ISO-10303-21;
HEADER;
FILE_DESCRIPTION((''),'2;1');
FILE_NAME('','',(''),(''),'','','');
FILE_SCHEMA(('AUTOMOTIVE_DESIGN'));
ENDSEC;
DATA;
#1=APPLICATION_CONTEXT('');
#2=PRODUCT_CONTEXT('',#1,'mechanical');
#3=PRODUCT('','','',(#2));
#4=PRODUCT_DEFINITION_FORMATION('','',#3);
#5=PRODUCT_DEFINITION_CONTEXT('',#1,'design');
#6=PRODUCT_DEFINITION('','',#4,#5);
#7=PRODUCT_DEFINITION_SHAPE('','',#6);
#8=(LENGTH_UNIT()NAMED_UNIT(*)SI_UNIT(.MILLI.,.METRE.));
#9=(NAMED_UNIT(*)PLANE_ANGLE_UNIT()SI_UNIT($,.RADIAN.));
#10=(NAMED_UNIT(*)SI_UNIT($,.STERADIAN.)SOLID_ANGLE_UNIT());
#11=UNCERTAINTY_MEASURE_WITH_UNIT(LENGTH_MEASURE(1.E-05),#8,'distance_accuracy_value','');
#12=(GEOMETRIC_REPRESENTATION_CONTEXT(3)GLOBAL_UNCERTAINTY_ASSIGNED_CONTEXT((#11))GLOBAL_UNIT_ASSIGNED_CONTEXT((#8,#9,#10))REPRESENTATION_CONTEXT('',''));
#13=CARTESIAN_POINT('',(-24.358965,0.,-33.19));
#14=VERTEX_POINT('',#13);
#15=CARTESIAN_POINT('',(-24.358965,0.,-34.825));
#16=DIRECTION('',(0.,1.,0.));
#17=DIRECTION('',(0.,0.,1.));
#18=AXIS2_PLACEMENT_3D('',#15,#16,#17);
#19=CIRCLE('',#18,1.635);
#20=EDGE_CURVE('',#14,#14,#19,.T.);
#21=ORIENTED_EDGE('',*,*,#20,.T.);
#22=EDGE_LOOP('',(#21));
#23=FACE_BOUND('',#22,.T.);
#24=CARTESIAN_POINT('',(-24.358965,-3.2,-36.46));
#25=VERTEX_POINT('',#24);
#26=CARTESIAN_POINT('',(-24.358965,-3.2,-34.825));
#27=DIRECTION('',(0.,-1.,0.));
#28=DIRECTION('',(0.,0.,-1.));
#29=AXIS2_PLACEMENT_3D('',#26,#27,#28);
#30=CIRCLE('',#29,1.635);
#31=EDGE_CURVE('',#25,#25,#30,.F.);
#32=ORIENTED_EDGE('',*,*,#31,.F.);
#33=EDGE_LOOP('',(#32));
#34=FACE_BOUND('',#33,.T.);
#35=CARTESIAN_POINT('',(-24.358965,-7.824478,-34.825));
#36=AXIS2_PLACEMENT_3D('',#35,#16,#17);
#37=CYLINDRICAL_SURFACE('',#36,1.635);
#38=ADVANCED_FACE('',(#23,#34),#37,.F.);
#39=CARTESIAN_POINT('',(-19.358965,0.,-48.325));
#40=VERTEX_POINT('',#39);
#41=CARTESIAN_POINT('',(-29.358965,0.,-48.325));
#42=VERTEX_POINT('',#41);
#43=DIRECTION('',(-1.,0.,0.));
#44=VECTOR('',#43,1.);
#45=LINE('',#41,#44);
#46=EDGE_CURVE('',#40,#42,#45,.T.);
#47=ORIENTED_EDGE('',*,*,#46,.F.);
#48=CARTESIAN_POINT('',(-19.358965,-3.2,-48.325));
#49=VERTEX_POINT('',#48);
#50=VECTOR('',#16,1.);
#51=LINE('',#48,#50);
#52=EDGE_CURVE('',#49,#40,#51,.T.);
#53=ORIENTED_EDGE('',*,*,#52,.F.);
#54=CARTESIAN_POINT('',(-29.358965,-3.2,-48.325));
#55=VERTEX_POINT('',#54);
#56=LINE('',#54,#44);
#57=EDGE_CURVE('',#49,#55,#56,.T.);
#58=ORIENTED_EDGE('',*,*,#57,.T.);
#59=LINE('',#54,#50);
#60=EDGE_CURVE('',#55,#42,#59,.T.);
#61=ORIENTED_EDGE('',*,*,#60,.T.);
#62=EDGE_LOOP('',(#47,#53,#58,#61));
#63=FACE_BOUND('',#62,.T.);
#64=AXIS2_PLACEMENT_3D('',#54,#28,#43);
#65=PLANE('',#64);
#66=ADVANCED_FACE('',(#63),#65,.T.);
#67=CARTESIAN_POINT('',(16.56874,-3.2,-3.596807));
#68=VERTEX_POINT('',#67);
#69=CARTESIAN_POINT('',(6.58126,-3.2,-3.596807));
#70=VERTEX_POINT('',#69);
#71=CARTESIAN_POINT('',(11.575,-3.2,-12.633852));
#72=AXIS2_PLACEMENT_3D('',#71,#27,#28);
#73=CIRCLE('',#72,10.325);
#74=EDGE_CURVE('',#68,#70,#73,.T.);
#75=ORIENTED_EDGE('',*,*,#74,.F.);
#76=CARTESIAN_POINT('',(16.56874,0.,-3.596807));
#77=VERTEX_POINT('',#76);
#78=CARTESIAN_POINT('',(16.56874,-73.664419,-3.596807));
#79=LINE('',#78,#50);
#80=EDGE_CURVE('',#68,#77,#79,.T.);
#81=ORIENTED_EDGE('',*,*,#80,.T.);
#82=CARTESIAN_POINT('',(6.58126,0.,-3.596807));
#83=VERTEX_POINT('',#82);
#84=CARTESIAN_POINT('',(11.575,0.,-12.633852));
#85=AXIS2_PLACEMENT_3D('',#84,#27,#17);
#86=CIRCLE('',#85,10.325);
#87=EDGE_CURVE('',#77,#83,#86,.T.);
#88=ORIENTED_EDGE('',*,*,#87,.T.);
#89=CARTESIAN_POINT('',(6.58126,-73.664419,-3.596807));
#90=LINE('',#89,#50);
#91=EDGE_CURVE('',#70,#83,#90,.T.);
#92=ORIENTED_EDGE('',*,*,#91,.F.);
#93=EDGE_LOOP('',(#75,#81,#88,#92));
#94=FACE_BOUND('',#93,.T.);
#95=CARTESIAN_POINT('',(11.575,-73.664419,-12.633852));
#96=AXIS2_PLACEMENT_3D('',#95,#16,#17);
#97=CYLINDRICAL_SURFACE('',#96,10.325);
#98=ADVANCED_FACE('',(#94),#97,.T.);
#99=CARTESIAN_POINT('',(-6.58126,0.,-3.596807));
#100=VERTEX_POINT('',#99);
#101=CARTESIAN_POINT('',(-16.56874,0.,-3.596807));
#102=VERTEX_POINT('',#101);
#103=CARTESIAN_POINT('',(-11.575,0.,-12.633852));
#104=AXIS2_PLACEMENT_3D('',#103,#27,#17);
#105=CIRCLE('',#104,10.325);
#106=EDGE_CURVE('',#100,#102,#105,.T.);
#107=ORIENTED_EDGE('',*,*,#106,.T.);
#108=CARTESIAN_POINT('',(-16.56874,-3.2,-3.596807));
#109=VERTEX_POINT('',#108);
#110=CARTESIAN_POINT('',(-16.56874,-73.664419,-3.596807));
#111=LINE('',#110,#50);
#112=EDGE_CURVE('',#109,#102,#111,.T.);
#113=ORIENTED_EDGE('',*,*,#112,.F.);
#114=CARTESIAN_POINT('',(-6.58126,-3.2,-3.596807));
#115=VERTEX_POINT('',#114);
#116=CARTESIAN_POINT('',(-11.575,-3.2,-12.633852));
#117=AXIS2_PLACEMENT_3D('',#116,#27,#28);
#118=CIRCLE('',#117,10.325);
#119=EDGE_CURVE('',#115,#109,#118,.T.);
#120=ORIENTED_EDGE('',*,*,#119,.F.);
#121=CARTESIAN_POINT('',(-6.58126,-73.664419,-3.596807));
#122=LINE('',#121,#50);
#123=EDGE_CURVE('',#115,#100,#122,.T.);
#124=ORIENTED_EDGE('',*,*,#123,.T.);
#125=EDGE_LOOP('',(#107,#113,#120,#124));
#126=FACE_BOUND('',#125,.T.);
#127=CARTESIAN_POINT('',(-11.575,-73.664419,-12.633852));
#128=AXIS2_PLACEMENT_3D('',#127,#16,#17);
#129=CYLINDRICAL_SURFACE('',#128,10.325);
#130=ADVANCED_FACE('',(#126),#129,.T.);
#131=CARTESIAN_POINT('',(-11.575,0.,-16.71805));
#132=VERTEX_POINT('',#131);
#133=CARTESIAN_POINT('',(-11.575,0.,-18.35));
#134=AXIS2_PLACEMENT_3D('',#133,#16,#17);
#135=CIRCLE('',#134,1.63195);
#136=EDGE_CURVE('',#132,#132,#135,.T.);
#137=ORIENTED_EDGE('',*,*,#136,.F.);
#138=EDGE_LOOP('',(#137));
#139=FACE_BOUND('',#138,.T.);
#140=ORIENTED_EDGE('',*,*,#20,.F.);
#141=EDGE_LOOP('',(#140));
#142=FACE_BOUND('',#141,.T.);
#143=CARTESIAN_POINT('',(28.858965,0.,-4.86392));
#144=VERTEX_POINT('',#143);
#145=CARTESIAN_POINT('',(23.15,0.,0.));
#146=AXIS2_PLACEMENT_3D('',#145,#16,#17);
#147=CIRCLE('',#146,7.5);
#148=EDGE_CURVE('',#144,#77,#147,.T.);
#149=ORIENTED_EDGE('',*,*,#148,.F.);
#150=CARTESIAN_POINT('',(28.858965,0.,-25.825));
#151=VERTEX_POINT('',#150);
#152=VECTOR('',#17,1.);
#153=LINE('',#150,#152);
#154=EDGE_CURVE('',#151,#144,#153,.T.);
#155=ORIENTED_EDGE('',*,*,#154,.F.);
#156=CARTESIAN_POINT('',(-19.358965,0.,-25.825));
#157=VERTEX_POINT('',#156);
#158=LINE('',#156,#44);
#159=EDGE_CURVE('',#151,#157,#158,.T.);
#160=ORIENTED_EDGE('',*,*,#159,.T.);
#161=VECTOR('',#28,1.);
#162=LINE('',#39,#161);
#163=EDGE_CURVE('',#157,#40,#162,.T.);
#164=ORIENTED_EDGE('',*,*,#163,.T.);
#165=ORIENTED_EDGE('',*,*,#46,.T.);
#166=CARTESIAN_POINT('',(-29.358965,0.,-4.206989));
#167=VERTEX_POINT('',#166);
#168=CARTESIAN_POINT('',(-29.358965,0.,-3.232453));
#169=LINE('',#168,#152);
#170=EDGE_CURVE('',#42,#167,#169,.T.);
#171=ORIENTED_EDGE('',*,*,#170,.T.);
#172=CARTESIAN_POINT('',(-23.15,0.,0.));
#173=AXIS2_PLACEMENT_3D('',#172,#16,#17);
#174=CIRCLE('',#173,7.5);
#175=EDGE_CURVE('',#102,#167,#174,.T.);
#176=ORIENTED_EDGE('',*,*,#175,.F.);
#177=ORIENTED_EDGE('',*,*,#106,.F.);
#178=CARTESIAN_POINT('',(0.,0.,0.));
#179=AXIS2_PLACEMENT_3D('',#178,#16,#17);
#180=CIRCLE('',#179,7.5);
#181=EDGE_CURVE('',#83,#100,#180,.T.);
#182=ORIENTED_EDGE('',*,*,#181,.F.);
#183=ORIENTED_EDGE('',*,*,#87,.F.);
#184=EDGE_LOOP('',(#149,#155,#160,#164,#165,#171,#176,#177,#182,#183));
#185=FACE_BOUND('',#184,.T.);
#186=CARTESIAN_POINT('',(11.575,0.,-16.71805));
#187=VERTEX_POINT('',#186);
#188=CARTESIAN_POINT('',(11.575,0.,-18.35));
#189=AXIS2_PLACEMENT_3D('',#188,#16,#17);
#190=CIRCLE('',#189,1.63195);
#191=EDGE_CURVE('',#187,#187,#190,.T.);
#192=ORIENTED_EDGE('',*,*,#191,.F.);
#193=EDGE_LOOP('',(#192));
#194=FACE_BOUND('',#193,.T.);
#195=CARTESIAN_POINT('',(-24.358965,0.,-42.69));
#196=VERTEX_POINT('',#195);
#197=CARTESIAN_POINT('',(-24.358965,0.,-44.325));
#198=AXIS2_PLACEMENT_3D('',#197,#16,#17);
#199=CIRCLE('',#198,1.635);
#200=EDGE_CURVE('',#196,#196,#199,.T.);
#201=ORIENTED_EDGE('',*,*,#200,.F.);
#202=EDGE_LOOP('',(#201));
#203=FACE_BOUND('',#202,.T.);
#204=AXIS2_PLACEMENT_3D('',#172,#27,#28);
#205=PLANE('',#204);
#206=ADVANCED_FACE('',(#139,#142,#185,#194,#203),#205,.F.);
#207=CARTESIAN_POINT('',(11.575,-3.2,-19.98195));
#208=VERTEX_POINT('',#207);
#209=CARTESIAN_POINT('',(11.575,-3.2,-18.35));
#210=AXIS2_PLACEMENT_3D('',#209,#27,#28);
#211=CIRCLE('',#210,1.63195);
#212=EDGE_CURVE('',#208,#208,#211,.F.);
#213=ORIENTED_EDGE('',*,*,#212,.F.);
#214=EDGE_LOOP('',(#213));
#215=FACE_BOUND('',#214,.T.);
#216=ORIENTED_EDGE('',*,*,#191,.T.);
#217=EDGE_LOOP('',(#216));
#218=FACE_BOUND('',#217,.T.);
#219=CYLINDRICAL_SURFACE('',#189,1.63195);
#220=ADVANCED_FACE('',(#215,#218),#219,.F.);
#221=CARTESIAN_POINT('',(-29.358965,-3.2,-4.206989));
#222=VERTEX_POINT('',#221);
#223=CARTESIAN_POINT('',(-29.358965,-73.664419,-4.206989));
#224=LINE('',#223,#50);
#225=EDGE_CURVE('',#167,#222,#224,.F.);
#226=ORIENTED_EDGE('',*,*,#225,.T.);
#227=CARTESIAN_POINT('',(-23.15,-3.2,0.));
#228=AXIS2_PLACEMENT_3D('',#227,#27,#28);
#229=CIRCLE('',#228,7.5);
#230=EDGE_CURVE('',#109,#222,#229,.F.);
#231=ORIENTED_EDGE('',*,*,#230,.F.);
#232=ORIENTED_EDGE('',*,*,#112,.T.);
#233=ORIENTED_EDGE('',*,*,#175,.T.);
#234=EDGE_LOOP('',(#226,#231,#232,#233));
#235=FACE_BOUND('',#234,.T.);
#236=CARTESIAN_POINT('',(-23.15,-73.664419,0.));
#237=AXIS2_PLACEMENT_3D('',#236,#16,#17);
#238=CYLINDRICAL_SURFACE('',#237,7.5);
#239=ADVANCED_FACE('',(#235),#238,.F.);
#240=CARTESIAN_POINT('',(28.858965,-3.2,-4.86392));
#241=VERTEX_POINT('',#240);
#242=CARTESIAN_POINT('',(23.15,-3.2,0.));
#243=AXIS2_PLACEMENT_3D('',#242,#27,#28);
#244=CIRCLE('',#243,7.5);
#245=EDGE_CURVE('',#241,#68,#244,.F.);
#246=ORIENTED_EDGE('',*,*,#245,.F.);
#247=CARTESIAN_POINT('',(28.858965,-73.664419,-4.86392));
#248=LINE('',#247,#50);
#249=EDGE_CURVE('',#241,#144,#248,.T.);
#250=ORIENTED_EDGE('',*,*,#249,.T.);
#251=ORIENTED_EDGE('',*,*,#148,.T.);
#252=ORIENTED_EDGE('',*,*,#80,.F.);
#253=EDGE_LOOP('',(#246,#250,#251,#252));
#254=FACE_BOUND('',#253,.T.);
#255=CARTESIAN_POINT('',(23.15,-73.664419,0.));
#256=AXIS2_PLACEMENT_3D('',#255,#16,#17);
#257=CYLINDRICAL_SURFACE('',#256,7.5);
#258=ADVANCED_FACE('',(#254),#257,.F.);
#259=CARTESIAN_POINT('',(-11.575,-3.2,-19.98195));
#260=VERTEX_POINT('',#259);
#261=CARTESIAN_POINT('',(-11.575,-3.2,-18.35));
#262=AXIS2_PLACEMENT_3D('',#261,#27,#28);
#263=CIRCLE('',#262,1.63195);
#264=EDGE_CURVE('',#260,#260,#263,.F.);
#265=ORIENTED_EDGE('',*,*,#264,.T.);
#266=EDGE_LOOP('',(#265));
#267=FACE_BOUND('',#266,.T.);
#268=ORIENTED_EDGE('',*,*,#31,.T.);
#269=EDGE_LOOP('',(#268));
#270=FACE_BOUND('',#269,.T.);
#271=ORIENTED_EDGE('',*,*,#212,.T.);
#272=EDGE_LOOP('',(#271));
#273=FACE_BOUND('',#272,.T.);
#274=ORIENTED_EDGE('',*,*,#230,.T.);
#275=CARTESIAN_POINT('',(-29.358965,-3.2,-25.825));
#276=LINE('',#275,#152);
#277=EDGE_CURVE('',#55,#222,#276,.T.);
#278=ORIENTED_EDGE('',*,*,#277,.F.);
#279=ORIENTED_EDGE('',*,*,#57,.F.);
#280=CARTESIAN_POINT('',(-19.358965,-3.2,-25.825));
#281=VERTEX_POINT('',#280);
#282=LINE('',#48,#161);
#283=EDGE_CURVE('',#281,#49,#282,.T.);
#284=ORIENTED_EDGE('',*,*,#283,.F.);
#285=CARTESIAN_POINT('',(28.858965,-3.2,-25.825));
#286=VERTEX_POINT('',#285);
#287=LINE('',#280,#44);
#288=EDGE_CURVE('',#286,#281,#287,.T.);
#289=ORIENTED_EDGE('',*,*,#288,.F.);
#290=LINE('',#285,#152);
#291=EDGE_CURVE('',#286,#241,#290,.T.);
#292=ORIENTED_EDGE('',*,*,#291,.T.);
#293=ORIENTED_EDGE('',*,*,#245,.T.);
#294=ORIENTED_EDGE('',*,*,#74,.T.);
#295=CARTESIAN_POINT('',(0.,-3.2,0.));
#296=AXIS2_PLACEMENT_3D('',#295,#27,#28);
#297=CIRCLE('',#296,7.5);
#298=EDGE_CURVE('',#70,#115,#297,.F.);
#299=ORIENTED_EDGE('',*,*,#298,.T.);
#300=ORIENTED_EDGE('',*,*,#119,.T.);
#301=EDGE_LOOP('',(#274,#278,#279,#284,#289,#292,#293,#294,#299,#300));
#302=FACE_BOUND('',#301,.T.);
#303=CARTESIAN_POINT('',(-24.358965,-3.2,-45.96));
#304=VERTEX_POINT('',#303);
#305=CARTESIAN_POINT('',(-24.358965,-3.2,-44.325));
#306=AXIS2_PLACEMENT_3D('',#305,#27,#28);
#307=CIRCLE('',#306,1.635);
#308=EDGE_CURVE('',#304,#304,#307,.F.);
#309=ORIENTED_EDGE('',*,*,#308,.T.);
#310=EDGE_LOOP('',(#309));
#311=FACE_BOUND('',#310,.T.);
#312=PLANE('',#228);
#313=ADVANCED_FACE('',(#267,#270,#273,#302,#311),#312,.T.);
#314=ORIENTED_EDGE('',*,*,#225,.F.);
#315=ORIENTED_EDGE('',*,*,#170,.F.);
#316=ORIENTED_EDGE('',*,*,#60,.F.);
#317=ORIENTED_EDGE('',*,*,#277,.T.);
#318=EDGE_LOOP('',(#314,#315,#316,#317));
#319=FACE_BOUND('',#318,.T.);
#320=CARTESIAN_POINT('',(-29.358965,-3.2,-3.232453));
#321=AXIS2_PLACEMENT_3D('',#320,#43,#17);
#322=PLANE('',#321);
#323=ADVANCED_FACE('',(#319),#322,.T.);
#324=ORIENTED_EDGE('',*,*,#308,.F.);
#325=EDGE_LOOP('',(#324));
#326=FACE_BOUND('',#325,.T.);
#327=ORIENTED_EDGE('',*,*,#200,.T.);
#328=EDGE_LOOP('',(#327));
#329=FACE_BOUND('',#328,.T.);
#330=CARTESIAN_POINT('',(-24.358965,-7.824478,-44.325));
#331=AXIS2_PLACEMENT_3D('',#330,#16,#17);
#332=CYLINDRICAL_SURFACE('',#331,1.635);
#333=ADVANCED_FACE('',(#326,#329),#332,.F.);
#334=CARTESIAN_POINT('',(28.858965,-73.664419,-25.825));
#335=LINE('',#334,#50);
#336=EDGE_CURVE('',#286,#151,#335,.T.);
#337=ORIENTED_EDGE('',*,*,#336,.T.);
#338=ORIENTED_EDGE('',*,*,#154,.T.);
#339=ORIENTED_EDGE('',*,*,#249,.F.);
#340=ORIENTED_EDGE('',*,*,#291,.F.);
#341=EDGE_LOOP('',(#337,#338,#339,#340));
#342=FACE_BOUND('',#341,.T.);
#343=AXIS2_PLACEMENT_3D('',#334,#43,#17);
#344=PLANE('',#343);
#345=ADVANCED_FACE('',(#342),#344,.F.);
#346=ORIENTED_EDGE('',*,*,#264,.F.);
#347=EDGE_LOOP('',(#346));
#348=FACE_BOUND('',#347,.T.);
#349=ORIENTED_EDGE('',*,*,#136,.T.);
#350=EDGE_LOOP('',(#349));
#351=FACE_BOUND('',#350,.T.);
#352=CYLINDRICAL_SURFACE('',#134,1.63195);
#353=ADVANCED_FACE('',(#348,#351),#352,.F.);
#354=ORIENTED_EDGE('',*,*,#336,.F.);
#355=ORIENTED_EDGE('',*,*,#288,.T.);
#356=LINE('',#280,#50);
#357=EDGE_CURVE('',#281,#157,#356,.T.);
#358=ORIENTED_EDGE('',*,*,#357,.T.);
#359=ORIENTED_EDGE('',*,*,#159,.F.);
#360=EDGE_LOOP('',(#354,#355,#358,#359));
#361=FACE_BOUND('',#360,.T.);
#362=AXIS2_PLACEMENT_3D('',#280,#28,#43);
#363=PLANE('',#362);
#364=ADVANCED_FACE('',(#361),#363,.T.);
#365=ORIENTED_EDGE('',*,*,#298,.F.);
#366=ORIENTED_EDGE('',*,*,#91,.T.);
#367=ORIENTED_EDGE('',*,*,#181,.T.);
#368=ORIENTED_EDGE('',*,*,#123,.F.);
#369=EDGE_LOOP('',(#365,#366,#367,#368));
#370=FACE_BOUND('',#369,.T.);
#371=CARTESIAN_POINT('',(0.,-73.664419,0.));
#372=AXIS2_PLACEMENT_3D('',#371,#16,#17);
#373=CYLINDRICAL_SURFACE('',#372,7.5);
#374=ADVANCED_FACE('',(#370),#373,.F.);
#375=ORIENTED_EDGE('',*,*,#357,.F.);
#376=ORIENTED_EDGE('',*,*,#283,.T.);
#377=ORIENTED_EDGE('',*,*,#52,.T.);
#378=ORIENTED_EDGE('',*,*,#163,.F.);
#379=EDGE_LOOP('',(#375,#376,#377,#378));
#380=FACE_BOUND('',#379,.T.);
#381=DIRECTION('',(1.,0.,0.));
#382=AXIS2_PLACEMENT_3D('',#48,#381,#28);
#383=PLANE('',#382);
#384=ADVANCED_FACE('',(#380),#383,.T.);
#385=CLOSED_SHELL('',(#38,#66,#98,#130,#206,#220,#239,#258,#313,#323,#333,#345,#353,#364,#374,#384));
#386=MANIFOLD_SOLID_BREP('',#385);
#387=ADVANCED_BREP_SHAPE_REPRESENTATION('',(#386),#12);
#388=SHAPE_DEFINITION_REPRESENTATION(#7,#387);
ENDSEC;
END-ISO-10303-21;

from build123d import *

# Parameters (mm, degrees)
BASE_FLANGE1_START        = -3.2
BASE_FLANGE1_DEPTH        = 3.2
SKETCH8_R                 = 1.635
CUT_EXTRUDE1_DEPTH        = 3.2
F_4_CLEARANCE_HOLE1_D     = 3.2639
F_4_CLEARANCE_HOLE1_DEPTH = 3.2
F_4_CLEARANCE_HOLE1_TIP   = 0.980574487
CUT_EXTRUDE2_DEPTH        = 3.2


# Read off the part's stored shape, not the designer's step: Base-Flange1
with BuildPart() as part:
    # Base-Flange1 outline → Base-Flange1 (new body)
    with BuildSketch(Plane(origin=(0, 0, 0), x_dir=(1, 0, 0), z_dir=(0, 1, 0)).offset(BASE_FLANGE1_START)):
        with BuildLine():
            ThreePointArc((-29.358964924, 3.232453337), (-23.15, 7), (-16.941035076, 3.232453337))
            ThreePointArc((-16.941035076, 3.232453337), (-11.575, 1.808851774), (-6.208964924, 3.232453337))
            ThreePointArc((-6.208964924, 3.232453337), (0, 7), (6.208964924, 3.232453337))
            ThreePointArc((6.208964924, 3.232453337), (11.575, 1.808851774), (16.941035076, 3.232453337))
            ThreePointArc((16.941035076, 3.232453337), (23.15, 7), (29.358964924, 3.232453337))
            Line((29.358964924, 3.232453337), (29.358964924, 25.825))
            Line((29.358964924, 25.825), (-19.358964924, 25.825))
            Line((-19.358964924, 25.825), (-19.358964924, 48.325))
            Line((-19.358964924, 48.325), (-29.358964924, 48.325))
            Line((-29.358964924, 48.325), (-29.358964924, 3.232453337))
        make_face()
    extrude(amount=BASE_FLANGE1_DEPTH)

    # Sketch8 → Cut-Extrude1 (cut)
    with BuildSketch(Plane(origin=(0, 0, 0), x_dir=(1, 0, 0), z_dir=(0, 1, 0))):
        with Locations(Location((-24.358964924, 44.325, 0), (0, 0, 270))):
            Circle(SKETCH8_R)
        with Locations(Location((-24.358964924, 34.825, 0), (0, 0, 270))):
            Circle(SKETCH8_R)
    extrude(amount=-CUT_EXTRUDE1_DEPTH, mode=Mode.SUBTRACT)

    # #4 Clearance Hole1
    with Locations(Plane(origin=(0, 0, 0), x_dir=(1, 0, 0), z_dir=(0, 1, 0))):
        with Locations((11.575, 18.35), (-11.575, 18.35)):
            Hole(F_4_CLEARANCE_HOLE1_D / 2, depth=F_4_CLEARANCE_HOLE1_DEPTH)
            with Locations((0, 0, -(F_4_CLEARANCE_HOLE1_DEPTH + F_4_CLEARANCE_HOLE1_TIP / 2))):  # 118° drill point
                Cone(0, F_4_CLEARANCE_HOLE1_D / 2, F_4_CLEARANCE_HOLE1_TIP, mode=Mode.SUBTRACT)

    # Sketch12 → Cut-Extrude2 (cut)
    with BuildSketch(Plane(origin=(0, 0, 0), x_dir=(1, 0, 0), z_dir=(0, 1, 0))):
        with BuildLine():
            Line((-29.802462418, 3.463342862), (-29.802462418, -1.121913875))
            Line((-29.802462418, -1.121913875), (35.30589457, -1.121913875))
            Line((35.30589457, -1.121913875), (35.30589457, 25.825))
            Line((35.30589457, 25.825), (28.858964924, 25.825))
            Line((28.858964924, 25.825), (28.858964924, 4.863920178))
            ThreePointArc((28.858964924, 4.863920178), (22.380832381, 7.460454488), (16.568740084, 3.596806627))
            ThreePointArc((16.568740084, 3.596806627), (11.575, 2.308851774), (6.581259916, 3.596806627))
            ThreePointArc((6.581259916, 3.596806627), (0, 7.5), (-6.581259916, 3.596806627))
            ThreePointArc((-6.581259916, 3.596806627), (-11.575, 2.308851774), (-16.568740084, 3.596806627))
            ThreePointArc((-16.568740084, 3.596806627), (-23.225634604, 7.499618617), (-29.802462418, 3.463342862))
        make_face()
    extrude(amount=-CUT_EXTRUDE2_DEPTH, mode=Mode.SUBTRACT)


solid = part.part
